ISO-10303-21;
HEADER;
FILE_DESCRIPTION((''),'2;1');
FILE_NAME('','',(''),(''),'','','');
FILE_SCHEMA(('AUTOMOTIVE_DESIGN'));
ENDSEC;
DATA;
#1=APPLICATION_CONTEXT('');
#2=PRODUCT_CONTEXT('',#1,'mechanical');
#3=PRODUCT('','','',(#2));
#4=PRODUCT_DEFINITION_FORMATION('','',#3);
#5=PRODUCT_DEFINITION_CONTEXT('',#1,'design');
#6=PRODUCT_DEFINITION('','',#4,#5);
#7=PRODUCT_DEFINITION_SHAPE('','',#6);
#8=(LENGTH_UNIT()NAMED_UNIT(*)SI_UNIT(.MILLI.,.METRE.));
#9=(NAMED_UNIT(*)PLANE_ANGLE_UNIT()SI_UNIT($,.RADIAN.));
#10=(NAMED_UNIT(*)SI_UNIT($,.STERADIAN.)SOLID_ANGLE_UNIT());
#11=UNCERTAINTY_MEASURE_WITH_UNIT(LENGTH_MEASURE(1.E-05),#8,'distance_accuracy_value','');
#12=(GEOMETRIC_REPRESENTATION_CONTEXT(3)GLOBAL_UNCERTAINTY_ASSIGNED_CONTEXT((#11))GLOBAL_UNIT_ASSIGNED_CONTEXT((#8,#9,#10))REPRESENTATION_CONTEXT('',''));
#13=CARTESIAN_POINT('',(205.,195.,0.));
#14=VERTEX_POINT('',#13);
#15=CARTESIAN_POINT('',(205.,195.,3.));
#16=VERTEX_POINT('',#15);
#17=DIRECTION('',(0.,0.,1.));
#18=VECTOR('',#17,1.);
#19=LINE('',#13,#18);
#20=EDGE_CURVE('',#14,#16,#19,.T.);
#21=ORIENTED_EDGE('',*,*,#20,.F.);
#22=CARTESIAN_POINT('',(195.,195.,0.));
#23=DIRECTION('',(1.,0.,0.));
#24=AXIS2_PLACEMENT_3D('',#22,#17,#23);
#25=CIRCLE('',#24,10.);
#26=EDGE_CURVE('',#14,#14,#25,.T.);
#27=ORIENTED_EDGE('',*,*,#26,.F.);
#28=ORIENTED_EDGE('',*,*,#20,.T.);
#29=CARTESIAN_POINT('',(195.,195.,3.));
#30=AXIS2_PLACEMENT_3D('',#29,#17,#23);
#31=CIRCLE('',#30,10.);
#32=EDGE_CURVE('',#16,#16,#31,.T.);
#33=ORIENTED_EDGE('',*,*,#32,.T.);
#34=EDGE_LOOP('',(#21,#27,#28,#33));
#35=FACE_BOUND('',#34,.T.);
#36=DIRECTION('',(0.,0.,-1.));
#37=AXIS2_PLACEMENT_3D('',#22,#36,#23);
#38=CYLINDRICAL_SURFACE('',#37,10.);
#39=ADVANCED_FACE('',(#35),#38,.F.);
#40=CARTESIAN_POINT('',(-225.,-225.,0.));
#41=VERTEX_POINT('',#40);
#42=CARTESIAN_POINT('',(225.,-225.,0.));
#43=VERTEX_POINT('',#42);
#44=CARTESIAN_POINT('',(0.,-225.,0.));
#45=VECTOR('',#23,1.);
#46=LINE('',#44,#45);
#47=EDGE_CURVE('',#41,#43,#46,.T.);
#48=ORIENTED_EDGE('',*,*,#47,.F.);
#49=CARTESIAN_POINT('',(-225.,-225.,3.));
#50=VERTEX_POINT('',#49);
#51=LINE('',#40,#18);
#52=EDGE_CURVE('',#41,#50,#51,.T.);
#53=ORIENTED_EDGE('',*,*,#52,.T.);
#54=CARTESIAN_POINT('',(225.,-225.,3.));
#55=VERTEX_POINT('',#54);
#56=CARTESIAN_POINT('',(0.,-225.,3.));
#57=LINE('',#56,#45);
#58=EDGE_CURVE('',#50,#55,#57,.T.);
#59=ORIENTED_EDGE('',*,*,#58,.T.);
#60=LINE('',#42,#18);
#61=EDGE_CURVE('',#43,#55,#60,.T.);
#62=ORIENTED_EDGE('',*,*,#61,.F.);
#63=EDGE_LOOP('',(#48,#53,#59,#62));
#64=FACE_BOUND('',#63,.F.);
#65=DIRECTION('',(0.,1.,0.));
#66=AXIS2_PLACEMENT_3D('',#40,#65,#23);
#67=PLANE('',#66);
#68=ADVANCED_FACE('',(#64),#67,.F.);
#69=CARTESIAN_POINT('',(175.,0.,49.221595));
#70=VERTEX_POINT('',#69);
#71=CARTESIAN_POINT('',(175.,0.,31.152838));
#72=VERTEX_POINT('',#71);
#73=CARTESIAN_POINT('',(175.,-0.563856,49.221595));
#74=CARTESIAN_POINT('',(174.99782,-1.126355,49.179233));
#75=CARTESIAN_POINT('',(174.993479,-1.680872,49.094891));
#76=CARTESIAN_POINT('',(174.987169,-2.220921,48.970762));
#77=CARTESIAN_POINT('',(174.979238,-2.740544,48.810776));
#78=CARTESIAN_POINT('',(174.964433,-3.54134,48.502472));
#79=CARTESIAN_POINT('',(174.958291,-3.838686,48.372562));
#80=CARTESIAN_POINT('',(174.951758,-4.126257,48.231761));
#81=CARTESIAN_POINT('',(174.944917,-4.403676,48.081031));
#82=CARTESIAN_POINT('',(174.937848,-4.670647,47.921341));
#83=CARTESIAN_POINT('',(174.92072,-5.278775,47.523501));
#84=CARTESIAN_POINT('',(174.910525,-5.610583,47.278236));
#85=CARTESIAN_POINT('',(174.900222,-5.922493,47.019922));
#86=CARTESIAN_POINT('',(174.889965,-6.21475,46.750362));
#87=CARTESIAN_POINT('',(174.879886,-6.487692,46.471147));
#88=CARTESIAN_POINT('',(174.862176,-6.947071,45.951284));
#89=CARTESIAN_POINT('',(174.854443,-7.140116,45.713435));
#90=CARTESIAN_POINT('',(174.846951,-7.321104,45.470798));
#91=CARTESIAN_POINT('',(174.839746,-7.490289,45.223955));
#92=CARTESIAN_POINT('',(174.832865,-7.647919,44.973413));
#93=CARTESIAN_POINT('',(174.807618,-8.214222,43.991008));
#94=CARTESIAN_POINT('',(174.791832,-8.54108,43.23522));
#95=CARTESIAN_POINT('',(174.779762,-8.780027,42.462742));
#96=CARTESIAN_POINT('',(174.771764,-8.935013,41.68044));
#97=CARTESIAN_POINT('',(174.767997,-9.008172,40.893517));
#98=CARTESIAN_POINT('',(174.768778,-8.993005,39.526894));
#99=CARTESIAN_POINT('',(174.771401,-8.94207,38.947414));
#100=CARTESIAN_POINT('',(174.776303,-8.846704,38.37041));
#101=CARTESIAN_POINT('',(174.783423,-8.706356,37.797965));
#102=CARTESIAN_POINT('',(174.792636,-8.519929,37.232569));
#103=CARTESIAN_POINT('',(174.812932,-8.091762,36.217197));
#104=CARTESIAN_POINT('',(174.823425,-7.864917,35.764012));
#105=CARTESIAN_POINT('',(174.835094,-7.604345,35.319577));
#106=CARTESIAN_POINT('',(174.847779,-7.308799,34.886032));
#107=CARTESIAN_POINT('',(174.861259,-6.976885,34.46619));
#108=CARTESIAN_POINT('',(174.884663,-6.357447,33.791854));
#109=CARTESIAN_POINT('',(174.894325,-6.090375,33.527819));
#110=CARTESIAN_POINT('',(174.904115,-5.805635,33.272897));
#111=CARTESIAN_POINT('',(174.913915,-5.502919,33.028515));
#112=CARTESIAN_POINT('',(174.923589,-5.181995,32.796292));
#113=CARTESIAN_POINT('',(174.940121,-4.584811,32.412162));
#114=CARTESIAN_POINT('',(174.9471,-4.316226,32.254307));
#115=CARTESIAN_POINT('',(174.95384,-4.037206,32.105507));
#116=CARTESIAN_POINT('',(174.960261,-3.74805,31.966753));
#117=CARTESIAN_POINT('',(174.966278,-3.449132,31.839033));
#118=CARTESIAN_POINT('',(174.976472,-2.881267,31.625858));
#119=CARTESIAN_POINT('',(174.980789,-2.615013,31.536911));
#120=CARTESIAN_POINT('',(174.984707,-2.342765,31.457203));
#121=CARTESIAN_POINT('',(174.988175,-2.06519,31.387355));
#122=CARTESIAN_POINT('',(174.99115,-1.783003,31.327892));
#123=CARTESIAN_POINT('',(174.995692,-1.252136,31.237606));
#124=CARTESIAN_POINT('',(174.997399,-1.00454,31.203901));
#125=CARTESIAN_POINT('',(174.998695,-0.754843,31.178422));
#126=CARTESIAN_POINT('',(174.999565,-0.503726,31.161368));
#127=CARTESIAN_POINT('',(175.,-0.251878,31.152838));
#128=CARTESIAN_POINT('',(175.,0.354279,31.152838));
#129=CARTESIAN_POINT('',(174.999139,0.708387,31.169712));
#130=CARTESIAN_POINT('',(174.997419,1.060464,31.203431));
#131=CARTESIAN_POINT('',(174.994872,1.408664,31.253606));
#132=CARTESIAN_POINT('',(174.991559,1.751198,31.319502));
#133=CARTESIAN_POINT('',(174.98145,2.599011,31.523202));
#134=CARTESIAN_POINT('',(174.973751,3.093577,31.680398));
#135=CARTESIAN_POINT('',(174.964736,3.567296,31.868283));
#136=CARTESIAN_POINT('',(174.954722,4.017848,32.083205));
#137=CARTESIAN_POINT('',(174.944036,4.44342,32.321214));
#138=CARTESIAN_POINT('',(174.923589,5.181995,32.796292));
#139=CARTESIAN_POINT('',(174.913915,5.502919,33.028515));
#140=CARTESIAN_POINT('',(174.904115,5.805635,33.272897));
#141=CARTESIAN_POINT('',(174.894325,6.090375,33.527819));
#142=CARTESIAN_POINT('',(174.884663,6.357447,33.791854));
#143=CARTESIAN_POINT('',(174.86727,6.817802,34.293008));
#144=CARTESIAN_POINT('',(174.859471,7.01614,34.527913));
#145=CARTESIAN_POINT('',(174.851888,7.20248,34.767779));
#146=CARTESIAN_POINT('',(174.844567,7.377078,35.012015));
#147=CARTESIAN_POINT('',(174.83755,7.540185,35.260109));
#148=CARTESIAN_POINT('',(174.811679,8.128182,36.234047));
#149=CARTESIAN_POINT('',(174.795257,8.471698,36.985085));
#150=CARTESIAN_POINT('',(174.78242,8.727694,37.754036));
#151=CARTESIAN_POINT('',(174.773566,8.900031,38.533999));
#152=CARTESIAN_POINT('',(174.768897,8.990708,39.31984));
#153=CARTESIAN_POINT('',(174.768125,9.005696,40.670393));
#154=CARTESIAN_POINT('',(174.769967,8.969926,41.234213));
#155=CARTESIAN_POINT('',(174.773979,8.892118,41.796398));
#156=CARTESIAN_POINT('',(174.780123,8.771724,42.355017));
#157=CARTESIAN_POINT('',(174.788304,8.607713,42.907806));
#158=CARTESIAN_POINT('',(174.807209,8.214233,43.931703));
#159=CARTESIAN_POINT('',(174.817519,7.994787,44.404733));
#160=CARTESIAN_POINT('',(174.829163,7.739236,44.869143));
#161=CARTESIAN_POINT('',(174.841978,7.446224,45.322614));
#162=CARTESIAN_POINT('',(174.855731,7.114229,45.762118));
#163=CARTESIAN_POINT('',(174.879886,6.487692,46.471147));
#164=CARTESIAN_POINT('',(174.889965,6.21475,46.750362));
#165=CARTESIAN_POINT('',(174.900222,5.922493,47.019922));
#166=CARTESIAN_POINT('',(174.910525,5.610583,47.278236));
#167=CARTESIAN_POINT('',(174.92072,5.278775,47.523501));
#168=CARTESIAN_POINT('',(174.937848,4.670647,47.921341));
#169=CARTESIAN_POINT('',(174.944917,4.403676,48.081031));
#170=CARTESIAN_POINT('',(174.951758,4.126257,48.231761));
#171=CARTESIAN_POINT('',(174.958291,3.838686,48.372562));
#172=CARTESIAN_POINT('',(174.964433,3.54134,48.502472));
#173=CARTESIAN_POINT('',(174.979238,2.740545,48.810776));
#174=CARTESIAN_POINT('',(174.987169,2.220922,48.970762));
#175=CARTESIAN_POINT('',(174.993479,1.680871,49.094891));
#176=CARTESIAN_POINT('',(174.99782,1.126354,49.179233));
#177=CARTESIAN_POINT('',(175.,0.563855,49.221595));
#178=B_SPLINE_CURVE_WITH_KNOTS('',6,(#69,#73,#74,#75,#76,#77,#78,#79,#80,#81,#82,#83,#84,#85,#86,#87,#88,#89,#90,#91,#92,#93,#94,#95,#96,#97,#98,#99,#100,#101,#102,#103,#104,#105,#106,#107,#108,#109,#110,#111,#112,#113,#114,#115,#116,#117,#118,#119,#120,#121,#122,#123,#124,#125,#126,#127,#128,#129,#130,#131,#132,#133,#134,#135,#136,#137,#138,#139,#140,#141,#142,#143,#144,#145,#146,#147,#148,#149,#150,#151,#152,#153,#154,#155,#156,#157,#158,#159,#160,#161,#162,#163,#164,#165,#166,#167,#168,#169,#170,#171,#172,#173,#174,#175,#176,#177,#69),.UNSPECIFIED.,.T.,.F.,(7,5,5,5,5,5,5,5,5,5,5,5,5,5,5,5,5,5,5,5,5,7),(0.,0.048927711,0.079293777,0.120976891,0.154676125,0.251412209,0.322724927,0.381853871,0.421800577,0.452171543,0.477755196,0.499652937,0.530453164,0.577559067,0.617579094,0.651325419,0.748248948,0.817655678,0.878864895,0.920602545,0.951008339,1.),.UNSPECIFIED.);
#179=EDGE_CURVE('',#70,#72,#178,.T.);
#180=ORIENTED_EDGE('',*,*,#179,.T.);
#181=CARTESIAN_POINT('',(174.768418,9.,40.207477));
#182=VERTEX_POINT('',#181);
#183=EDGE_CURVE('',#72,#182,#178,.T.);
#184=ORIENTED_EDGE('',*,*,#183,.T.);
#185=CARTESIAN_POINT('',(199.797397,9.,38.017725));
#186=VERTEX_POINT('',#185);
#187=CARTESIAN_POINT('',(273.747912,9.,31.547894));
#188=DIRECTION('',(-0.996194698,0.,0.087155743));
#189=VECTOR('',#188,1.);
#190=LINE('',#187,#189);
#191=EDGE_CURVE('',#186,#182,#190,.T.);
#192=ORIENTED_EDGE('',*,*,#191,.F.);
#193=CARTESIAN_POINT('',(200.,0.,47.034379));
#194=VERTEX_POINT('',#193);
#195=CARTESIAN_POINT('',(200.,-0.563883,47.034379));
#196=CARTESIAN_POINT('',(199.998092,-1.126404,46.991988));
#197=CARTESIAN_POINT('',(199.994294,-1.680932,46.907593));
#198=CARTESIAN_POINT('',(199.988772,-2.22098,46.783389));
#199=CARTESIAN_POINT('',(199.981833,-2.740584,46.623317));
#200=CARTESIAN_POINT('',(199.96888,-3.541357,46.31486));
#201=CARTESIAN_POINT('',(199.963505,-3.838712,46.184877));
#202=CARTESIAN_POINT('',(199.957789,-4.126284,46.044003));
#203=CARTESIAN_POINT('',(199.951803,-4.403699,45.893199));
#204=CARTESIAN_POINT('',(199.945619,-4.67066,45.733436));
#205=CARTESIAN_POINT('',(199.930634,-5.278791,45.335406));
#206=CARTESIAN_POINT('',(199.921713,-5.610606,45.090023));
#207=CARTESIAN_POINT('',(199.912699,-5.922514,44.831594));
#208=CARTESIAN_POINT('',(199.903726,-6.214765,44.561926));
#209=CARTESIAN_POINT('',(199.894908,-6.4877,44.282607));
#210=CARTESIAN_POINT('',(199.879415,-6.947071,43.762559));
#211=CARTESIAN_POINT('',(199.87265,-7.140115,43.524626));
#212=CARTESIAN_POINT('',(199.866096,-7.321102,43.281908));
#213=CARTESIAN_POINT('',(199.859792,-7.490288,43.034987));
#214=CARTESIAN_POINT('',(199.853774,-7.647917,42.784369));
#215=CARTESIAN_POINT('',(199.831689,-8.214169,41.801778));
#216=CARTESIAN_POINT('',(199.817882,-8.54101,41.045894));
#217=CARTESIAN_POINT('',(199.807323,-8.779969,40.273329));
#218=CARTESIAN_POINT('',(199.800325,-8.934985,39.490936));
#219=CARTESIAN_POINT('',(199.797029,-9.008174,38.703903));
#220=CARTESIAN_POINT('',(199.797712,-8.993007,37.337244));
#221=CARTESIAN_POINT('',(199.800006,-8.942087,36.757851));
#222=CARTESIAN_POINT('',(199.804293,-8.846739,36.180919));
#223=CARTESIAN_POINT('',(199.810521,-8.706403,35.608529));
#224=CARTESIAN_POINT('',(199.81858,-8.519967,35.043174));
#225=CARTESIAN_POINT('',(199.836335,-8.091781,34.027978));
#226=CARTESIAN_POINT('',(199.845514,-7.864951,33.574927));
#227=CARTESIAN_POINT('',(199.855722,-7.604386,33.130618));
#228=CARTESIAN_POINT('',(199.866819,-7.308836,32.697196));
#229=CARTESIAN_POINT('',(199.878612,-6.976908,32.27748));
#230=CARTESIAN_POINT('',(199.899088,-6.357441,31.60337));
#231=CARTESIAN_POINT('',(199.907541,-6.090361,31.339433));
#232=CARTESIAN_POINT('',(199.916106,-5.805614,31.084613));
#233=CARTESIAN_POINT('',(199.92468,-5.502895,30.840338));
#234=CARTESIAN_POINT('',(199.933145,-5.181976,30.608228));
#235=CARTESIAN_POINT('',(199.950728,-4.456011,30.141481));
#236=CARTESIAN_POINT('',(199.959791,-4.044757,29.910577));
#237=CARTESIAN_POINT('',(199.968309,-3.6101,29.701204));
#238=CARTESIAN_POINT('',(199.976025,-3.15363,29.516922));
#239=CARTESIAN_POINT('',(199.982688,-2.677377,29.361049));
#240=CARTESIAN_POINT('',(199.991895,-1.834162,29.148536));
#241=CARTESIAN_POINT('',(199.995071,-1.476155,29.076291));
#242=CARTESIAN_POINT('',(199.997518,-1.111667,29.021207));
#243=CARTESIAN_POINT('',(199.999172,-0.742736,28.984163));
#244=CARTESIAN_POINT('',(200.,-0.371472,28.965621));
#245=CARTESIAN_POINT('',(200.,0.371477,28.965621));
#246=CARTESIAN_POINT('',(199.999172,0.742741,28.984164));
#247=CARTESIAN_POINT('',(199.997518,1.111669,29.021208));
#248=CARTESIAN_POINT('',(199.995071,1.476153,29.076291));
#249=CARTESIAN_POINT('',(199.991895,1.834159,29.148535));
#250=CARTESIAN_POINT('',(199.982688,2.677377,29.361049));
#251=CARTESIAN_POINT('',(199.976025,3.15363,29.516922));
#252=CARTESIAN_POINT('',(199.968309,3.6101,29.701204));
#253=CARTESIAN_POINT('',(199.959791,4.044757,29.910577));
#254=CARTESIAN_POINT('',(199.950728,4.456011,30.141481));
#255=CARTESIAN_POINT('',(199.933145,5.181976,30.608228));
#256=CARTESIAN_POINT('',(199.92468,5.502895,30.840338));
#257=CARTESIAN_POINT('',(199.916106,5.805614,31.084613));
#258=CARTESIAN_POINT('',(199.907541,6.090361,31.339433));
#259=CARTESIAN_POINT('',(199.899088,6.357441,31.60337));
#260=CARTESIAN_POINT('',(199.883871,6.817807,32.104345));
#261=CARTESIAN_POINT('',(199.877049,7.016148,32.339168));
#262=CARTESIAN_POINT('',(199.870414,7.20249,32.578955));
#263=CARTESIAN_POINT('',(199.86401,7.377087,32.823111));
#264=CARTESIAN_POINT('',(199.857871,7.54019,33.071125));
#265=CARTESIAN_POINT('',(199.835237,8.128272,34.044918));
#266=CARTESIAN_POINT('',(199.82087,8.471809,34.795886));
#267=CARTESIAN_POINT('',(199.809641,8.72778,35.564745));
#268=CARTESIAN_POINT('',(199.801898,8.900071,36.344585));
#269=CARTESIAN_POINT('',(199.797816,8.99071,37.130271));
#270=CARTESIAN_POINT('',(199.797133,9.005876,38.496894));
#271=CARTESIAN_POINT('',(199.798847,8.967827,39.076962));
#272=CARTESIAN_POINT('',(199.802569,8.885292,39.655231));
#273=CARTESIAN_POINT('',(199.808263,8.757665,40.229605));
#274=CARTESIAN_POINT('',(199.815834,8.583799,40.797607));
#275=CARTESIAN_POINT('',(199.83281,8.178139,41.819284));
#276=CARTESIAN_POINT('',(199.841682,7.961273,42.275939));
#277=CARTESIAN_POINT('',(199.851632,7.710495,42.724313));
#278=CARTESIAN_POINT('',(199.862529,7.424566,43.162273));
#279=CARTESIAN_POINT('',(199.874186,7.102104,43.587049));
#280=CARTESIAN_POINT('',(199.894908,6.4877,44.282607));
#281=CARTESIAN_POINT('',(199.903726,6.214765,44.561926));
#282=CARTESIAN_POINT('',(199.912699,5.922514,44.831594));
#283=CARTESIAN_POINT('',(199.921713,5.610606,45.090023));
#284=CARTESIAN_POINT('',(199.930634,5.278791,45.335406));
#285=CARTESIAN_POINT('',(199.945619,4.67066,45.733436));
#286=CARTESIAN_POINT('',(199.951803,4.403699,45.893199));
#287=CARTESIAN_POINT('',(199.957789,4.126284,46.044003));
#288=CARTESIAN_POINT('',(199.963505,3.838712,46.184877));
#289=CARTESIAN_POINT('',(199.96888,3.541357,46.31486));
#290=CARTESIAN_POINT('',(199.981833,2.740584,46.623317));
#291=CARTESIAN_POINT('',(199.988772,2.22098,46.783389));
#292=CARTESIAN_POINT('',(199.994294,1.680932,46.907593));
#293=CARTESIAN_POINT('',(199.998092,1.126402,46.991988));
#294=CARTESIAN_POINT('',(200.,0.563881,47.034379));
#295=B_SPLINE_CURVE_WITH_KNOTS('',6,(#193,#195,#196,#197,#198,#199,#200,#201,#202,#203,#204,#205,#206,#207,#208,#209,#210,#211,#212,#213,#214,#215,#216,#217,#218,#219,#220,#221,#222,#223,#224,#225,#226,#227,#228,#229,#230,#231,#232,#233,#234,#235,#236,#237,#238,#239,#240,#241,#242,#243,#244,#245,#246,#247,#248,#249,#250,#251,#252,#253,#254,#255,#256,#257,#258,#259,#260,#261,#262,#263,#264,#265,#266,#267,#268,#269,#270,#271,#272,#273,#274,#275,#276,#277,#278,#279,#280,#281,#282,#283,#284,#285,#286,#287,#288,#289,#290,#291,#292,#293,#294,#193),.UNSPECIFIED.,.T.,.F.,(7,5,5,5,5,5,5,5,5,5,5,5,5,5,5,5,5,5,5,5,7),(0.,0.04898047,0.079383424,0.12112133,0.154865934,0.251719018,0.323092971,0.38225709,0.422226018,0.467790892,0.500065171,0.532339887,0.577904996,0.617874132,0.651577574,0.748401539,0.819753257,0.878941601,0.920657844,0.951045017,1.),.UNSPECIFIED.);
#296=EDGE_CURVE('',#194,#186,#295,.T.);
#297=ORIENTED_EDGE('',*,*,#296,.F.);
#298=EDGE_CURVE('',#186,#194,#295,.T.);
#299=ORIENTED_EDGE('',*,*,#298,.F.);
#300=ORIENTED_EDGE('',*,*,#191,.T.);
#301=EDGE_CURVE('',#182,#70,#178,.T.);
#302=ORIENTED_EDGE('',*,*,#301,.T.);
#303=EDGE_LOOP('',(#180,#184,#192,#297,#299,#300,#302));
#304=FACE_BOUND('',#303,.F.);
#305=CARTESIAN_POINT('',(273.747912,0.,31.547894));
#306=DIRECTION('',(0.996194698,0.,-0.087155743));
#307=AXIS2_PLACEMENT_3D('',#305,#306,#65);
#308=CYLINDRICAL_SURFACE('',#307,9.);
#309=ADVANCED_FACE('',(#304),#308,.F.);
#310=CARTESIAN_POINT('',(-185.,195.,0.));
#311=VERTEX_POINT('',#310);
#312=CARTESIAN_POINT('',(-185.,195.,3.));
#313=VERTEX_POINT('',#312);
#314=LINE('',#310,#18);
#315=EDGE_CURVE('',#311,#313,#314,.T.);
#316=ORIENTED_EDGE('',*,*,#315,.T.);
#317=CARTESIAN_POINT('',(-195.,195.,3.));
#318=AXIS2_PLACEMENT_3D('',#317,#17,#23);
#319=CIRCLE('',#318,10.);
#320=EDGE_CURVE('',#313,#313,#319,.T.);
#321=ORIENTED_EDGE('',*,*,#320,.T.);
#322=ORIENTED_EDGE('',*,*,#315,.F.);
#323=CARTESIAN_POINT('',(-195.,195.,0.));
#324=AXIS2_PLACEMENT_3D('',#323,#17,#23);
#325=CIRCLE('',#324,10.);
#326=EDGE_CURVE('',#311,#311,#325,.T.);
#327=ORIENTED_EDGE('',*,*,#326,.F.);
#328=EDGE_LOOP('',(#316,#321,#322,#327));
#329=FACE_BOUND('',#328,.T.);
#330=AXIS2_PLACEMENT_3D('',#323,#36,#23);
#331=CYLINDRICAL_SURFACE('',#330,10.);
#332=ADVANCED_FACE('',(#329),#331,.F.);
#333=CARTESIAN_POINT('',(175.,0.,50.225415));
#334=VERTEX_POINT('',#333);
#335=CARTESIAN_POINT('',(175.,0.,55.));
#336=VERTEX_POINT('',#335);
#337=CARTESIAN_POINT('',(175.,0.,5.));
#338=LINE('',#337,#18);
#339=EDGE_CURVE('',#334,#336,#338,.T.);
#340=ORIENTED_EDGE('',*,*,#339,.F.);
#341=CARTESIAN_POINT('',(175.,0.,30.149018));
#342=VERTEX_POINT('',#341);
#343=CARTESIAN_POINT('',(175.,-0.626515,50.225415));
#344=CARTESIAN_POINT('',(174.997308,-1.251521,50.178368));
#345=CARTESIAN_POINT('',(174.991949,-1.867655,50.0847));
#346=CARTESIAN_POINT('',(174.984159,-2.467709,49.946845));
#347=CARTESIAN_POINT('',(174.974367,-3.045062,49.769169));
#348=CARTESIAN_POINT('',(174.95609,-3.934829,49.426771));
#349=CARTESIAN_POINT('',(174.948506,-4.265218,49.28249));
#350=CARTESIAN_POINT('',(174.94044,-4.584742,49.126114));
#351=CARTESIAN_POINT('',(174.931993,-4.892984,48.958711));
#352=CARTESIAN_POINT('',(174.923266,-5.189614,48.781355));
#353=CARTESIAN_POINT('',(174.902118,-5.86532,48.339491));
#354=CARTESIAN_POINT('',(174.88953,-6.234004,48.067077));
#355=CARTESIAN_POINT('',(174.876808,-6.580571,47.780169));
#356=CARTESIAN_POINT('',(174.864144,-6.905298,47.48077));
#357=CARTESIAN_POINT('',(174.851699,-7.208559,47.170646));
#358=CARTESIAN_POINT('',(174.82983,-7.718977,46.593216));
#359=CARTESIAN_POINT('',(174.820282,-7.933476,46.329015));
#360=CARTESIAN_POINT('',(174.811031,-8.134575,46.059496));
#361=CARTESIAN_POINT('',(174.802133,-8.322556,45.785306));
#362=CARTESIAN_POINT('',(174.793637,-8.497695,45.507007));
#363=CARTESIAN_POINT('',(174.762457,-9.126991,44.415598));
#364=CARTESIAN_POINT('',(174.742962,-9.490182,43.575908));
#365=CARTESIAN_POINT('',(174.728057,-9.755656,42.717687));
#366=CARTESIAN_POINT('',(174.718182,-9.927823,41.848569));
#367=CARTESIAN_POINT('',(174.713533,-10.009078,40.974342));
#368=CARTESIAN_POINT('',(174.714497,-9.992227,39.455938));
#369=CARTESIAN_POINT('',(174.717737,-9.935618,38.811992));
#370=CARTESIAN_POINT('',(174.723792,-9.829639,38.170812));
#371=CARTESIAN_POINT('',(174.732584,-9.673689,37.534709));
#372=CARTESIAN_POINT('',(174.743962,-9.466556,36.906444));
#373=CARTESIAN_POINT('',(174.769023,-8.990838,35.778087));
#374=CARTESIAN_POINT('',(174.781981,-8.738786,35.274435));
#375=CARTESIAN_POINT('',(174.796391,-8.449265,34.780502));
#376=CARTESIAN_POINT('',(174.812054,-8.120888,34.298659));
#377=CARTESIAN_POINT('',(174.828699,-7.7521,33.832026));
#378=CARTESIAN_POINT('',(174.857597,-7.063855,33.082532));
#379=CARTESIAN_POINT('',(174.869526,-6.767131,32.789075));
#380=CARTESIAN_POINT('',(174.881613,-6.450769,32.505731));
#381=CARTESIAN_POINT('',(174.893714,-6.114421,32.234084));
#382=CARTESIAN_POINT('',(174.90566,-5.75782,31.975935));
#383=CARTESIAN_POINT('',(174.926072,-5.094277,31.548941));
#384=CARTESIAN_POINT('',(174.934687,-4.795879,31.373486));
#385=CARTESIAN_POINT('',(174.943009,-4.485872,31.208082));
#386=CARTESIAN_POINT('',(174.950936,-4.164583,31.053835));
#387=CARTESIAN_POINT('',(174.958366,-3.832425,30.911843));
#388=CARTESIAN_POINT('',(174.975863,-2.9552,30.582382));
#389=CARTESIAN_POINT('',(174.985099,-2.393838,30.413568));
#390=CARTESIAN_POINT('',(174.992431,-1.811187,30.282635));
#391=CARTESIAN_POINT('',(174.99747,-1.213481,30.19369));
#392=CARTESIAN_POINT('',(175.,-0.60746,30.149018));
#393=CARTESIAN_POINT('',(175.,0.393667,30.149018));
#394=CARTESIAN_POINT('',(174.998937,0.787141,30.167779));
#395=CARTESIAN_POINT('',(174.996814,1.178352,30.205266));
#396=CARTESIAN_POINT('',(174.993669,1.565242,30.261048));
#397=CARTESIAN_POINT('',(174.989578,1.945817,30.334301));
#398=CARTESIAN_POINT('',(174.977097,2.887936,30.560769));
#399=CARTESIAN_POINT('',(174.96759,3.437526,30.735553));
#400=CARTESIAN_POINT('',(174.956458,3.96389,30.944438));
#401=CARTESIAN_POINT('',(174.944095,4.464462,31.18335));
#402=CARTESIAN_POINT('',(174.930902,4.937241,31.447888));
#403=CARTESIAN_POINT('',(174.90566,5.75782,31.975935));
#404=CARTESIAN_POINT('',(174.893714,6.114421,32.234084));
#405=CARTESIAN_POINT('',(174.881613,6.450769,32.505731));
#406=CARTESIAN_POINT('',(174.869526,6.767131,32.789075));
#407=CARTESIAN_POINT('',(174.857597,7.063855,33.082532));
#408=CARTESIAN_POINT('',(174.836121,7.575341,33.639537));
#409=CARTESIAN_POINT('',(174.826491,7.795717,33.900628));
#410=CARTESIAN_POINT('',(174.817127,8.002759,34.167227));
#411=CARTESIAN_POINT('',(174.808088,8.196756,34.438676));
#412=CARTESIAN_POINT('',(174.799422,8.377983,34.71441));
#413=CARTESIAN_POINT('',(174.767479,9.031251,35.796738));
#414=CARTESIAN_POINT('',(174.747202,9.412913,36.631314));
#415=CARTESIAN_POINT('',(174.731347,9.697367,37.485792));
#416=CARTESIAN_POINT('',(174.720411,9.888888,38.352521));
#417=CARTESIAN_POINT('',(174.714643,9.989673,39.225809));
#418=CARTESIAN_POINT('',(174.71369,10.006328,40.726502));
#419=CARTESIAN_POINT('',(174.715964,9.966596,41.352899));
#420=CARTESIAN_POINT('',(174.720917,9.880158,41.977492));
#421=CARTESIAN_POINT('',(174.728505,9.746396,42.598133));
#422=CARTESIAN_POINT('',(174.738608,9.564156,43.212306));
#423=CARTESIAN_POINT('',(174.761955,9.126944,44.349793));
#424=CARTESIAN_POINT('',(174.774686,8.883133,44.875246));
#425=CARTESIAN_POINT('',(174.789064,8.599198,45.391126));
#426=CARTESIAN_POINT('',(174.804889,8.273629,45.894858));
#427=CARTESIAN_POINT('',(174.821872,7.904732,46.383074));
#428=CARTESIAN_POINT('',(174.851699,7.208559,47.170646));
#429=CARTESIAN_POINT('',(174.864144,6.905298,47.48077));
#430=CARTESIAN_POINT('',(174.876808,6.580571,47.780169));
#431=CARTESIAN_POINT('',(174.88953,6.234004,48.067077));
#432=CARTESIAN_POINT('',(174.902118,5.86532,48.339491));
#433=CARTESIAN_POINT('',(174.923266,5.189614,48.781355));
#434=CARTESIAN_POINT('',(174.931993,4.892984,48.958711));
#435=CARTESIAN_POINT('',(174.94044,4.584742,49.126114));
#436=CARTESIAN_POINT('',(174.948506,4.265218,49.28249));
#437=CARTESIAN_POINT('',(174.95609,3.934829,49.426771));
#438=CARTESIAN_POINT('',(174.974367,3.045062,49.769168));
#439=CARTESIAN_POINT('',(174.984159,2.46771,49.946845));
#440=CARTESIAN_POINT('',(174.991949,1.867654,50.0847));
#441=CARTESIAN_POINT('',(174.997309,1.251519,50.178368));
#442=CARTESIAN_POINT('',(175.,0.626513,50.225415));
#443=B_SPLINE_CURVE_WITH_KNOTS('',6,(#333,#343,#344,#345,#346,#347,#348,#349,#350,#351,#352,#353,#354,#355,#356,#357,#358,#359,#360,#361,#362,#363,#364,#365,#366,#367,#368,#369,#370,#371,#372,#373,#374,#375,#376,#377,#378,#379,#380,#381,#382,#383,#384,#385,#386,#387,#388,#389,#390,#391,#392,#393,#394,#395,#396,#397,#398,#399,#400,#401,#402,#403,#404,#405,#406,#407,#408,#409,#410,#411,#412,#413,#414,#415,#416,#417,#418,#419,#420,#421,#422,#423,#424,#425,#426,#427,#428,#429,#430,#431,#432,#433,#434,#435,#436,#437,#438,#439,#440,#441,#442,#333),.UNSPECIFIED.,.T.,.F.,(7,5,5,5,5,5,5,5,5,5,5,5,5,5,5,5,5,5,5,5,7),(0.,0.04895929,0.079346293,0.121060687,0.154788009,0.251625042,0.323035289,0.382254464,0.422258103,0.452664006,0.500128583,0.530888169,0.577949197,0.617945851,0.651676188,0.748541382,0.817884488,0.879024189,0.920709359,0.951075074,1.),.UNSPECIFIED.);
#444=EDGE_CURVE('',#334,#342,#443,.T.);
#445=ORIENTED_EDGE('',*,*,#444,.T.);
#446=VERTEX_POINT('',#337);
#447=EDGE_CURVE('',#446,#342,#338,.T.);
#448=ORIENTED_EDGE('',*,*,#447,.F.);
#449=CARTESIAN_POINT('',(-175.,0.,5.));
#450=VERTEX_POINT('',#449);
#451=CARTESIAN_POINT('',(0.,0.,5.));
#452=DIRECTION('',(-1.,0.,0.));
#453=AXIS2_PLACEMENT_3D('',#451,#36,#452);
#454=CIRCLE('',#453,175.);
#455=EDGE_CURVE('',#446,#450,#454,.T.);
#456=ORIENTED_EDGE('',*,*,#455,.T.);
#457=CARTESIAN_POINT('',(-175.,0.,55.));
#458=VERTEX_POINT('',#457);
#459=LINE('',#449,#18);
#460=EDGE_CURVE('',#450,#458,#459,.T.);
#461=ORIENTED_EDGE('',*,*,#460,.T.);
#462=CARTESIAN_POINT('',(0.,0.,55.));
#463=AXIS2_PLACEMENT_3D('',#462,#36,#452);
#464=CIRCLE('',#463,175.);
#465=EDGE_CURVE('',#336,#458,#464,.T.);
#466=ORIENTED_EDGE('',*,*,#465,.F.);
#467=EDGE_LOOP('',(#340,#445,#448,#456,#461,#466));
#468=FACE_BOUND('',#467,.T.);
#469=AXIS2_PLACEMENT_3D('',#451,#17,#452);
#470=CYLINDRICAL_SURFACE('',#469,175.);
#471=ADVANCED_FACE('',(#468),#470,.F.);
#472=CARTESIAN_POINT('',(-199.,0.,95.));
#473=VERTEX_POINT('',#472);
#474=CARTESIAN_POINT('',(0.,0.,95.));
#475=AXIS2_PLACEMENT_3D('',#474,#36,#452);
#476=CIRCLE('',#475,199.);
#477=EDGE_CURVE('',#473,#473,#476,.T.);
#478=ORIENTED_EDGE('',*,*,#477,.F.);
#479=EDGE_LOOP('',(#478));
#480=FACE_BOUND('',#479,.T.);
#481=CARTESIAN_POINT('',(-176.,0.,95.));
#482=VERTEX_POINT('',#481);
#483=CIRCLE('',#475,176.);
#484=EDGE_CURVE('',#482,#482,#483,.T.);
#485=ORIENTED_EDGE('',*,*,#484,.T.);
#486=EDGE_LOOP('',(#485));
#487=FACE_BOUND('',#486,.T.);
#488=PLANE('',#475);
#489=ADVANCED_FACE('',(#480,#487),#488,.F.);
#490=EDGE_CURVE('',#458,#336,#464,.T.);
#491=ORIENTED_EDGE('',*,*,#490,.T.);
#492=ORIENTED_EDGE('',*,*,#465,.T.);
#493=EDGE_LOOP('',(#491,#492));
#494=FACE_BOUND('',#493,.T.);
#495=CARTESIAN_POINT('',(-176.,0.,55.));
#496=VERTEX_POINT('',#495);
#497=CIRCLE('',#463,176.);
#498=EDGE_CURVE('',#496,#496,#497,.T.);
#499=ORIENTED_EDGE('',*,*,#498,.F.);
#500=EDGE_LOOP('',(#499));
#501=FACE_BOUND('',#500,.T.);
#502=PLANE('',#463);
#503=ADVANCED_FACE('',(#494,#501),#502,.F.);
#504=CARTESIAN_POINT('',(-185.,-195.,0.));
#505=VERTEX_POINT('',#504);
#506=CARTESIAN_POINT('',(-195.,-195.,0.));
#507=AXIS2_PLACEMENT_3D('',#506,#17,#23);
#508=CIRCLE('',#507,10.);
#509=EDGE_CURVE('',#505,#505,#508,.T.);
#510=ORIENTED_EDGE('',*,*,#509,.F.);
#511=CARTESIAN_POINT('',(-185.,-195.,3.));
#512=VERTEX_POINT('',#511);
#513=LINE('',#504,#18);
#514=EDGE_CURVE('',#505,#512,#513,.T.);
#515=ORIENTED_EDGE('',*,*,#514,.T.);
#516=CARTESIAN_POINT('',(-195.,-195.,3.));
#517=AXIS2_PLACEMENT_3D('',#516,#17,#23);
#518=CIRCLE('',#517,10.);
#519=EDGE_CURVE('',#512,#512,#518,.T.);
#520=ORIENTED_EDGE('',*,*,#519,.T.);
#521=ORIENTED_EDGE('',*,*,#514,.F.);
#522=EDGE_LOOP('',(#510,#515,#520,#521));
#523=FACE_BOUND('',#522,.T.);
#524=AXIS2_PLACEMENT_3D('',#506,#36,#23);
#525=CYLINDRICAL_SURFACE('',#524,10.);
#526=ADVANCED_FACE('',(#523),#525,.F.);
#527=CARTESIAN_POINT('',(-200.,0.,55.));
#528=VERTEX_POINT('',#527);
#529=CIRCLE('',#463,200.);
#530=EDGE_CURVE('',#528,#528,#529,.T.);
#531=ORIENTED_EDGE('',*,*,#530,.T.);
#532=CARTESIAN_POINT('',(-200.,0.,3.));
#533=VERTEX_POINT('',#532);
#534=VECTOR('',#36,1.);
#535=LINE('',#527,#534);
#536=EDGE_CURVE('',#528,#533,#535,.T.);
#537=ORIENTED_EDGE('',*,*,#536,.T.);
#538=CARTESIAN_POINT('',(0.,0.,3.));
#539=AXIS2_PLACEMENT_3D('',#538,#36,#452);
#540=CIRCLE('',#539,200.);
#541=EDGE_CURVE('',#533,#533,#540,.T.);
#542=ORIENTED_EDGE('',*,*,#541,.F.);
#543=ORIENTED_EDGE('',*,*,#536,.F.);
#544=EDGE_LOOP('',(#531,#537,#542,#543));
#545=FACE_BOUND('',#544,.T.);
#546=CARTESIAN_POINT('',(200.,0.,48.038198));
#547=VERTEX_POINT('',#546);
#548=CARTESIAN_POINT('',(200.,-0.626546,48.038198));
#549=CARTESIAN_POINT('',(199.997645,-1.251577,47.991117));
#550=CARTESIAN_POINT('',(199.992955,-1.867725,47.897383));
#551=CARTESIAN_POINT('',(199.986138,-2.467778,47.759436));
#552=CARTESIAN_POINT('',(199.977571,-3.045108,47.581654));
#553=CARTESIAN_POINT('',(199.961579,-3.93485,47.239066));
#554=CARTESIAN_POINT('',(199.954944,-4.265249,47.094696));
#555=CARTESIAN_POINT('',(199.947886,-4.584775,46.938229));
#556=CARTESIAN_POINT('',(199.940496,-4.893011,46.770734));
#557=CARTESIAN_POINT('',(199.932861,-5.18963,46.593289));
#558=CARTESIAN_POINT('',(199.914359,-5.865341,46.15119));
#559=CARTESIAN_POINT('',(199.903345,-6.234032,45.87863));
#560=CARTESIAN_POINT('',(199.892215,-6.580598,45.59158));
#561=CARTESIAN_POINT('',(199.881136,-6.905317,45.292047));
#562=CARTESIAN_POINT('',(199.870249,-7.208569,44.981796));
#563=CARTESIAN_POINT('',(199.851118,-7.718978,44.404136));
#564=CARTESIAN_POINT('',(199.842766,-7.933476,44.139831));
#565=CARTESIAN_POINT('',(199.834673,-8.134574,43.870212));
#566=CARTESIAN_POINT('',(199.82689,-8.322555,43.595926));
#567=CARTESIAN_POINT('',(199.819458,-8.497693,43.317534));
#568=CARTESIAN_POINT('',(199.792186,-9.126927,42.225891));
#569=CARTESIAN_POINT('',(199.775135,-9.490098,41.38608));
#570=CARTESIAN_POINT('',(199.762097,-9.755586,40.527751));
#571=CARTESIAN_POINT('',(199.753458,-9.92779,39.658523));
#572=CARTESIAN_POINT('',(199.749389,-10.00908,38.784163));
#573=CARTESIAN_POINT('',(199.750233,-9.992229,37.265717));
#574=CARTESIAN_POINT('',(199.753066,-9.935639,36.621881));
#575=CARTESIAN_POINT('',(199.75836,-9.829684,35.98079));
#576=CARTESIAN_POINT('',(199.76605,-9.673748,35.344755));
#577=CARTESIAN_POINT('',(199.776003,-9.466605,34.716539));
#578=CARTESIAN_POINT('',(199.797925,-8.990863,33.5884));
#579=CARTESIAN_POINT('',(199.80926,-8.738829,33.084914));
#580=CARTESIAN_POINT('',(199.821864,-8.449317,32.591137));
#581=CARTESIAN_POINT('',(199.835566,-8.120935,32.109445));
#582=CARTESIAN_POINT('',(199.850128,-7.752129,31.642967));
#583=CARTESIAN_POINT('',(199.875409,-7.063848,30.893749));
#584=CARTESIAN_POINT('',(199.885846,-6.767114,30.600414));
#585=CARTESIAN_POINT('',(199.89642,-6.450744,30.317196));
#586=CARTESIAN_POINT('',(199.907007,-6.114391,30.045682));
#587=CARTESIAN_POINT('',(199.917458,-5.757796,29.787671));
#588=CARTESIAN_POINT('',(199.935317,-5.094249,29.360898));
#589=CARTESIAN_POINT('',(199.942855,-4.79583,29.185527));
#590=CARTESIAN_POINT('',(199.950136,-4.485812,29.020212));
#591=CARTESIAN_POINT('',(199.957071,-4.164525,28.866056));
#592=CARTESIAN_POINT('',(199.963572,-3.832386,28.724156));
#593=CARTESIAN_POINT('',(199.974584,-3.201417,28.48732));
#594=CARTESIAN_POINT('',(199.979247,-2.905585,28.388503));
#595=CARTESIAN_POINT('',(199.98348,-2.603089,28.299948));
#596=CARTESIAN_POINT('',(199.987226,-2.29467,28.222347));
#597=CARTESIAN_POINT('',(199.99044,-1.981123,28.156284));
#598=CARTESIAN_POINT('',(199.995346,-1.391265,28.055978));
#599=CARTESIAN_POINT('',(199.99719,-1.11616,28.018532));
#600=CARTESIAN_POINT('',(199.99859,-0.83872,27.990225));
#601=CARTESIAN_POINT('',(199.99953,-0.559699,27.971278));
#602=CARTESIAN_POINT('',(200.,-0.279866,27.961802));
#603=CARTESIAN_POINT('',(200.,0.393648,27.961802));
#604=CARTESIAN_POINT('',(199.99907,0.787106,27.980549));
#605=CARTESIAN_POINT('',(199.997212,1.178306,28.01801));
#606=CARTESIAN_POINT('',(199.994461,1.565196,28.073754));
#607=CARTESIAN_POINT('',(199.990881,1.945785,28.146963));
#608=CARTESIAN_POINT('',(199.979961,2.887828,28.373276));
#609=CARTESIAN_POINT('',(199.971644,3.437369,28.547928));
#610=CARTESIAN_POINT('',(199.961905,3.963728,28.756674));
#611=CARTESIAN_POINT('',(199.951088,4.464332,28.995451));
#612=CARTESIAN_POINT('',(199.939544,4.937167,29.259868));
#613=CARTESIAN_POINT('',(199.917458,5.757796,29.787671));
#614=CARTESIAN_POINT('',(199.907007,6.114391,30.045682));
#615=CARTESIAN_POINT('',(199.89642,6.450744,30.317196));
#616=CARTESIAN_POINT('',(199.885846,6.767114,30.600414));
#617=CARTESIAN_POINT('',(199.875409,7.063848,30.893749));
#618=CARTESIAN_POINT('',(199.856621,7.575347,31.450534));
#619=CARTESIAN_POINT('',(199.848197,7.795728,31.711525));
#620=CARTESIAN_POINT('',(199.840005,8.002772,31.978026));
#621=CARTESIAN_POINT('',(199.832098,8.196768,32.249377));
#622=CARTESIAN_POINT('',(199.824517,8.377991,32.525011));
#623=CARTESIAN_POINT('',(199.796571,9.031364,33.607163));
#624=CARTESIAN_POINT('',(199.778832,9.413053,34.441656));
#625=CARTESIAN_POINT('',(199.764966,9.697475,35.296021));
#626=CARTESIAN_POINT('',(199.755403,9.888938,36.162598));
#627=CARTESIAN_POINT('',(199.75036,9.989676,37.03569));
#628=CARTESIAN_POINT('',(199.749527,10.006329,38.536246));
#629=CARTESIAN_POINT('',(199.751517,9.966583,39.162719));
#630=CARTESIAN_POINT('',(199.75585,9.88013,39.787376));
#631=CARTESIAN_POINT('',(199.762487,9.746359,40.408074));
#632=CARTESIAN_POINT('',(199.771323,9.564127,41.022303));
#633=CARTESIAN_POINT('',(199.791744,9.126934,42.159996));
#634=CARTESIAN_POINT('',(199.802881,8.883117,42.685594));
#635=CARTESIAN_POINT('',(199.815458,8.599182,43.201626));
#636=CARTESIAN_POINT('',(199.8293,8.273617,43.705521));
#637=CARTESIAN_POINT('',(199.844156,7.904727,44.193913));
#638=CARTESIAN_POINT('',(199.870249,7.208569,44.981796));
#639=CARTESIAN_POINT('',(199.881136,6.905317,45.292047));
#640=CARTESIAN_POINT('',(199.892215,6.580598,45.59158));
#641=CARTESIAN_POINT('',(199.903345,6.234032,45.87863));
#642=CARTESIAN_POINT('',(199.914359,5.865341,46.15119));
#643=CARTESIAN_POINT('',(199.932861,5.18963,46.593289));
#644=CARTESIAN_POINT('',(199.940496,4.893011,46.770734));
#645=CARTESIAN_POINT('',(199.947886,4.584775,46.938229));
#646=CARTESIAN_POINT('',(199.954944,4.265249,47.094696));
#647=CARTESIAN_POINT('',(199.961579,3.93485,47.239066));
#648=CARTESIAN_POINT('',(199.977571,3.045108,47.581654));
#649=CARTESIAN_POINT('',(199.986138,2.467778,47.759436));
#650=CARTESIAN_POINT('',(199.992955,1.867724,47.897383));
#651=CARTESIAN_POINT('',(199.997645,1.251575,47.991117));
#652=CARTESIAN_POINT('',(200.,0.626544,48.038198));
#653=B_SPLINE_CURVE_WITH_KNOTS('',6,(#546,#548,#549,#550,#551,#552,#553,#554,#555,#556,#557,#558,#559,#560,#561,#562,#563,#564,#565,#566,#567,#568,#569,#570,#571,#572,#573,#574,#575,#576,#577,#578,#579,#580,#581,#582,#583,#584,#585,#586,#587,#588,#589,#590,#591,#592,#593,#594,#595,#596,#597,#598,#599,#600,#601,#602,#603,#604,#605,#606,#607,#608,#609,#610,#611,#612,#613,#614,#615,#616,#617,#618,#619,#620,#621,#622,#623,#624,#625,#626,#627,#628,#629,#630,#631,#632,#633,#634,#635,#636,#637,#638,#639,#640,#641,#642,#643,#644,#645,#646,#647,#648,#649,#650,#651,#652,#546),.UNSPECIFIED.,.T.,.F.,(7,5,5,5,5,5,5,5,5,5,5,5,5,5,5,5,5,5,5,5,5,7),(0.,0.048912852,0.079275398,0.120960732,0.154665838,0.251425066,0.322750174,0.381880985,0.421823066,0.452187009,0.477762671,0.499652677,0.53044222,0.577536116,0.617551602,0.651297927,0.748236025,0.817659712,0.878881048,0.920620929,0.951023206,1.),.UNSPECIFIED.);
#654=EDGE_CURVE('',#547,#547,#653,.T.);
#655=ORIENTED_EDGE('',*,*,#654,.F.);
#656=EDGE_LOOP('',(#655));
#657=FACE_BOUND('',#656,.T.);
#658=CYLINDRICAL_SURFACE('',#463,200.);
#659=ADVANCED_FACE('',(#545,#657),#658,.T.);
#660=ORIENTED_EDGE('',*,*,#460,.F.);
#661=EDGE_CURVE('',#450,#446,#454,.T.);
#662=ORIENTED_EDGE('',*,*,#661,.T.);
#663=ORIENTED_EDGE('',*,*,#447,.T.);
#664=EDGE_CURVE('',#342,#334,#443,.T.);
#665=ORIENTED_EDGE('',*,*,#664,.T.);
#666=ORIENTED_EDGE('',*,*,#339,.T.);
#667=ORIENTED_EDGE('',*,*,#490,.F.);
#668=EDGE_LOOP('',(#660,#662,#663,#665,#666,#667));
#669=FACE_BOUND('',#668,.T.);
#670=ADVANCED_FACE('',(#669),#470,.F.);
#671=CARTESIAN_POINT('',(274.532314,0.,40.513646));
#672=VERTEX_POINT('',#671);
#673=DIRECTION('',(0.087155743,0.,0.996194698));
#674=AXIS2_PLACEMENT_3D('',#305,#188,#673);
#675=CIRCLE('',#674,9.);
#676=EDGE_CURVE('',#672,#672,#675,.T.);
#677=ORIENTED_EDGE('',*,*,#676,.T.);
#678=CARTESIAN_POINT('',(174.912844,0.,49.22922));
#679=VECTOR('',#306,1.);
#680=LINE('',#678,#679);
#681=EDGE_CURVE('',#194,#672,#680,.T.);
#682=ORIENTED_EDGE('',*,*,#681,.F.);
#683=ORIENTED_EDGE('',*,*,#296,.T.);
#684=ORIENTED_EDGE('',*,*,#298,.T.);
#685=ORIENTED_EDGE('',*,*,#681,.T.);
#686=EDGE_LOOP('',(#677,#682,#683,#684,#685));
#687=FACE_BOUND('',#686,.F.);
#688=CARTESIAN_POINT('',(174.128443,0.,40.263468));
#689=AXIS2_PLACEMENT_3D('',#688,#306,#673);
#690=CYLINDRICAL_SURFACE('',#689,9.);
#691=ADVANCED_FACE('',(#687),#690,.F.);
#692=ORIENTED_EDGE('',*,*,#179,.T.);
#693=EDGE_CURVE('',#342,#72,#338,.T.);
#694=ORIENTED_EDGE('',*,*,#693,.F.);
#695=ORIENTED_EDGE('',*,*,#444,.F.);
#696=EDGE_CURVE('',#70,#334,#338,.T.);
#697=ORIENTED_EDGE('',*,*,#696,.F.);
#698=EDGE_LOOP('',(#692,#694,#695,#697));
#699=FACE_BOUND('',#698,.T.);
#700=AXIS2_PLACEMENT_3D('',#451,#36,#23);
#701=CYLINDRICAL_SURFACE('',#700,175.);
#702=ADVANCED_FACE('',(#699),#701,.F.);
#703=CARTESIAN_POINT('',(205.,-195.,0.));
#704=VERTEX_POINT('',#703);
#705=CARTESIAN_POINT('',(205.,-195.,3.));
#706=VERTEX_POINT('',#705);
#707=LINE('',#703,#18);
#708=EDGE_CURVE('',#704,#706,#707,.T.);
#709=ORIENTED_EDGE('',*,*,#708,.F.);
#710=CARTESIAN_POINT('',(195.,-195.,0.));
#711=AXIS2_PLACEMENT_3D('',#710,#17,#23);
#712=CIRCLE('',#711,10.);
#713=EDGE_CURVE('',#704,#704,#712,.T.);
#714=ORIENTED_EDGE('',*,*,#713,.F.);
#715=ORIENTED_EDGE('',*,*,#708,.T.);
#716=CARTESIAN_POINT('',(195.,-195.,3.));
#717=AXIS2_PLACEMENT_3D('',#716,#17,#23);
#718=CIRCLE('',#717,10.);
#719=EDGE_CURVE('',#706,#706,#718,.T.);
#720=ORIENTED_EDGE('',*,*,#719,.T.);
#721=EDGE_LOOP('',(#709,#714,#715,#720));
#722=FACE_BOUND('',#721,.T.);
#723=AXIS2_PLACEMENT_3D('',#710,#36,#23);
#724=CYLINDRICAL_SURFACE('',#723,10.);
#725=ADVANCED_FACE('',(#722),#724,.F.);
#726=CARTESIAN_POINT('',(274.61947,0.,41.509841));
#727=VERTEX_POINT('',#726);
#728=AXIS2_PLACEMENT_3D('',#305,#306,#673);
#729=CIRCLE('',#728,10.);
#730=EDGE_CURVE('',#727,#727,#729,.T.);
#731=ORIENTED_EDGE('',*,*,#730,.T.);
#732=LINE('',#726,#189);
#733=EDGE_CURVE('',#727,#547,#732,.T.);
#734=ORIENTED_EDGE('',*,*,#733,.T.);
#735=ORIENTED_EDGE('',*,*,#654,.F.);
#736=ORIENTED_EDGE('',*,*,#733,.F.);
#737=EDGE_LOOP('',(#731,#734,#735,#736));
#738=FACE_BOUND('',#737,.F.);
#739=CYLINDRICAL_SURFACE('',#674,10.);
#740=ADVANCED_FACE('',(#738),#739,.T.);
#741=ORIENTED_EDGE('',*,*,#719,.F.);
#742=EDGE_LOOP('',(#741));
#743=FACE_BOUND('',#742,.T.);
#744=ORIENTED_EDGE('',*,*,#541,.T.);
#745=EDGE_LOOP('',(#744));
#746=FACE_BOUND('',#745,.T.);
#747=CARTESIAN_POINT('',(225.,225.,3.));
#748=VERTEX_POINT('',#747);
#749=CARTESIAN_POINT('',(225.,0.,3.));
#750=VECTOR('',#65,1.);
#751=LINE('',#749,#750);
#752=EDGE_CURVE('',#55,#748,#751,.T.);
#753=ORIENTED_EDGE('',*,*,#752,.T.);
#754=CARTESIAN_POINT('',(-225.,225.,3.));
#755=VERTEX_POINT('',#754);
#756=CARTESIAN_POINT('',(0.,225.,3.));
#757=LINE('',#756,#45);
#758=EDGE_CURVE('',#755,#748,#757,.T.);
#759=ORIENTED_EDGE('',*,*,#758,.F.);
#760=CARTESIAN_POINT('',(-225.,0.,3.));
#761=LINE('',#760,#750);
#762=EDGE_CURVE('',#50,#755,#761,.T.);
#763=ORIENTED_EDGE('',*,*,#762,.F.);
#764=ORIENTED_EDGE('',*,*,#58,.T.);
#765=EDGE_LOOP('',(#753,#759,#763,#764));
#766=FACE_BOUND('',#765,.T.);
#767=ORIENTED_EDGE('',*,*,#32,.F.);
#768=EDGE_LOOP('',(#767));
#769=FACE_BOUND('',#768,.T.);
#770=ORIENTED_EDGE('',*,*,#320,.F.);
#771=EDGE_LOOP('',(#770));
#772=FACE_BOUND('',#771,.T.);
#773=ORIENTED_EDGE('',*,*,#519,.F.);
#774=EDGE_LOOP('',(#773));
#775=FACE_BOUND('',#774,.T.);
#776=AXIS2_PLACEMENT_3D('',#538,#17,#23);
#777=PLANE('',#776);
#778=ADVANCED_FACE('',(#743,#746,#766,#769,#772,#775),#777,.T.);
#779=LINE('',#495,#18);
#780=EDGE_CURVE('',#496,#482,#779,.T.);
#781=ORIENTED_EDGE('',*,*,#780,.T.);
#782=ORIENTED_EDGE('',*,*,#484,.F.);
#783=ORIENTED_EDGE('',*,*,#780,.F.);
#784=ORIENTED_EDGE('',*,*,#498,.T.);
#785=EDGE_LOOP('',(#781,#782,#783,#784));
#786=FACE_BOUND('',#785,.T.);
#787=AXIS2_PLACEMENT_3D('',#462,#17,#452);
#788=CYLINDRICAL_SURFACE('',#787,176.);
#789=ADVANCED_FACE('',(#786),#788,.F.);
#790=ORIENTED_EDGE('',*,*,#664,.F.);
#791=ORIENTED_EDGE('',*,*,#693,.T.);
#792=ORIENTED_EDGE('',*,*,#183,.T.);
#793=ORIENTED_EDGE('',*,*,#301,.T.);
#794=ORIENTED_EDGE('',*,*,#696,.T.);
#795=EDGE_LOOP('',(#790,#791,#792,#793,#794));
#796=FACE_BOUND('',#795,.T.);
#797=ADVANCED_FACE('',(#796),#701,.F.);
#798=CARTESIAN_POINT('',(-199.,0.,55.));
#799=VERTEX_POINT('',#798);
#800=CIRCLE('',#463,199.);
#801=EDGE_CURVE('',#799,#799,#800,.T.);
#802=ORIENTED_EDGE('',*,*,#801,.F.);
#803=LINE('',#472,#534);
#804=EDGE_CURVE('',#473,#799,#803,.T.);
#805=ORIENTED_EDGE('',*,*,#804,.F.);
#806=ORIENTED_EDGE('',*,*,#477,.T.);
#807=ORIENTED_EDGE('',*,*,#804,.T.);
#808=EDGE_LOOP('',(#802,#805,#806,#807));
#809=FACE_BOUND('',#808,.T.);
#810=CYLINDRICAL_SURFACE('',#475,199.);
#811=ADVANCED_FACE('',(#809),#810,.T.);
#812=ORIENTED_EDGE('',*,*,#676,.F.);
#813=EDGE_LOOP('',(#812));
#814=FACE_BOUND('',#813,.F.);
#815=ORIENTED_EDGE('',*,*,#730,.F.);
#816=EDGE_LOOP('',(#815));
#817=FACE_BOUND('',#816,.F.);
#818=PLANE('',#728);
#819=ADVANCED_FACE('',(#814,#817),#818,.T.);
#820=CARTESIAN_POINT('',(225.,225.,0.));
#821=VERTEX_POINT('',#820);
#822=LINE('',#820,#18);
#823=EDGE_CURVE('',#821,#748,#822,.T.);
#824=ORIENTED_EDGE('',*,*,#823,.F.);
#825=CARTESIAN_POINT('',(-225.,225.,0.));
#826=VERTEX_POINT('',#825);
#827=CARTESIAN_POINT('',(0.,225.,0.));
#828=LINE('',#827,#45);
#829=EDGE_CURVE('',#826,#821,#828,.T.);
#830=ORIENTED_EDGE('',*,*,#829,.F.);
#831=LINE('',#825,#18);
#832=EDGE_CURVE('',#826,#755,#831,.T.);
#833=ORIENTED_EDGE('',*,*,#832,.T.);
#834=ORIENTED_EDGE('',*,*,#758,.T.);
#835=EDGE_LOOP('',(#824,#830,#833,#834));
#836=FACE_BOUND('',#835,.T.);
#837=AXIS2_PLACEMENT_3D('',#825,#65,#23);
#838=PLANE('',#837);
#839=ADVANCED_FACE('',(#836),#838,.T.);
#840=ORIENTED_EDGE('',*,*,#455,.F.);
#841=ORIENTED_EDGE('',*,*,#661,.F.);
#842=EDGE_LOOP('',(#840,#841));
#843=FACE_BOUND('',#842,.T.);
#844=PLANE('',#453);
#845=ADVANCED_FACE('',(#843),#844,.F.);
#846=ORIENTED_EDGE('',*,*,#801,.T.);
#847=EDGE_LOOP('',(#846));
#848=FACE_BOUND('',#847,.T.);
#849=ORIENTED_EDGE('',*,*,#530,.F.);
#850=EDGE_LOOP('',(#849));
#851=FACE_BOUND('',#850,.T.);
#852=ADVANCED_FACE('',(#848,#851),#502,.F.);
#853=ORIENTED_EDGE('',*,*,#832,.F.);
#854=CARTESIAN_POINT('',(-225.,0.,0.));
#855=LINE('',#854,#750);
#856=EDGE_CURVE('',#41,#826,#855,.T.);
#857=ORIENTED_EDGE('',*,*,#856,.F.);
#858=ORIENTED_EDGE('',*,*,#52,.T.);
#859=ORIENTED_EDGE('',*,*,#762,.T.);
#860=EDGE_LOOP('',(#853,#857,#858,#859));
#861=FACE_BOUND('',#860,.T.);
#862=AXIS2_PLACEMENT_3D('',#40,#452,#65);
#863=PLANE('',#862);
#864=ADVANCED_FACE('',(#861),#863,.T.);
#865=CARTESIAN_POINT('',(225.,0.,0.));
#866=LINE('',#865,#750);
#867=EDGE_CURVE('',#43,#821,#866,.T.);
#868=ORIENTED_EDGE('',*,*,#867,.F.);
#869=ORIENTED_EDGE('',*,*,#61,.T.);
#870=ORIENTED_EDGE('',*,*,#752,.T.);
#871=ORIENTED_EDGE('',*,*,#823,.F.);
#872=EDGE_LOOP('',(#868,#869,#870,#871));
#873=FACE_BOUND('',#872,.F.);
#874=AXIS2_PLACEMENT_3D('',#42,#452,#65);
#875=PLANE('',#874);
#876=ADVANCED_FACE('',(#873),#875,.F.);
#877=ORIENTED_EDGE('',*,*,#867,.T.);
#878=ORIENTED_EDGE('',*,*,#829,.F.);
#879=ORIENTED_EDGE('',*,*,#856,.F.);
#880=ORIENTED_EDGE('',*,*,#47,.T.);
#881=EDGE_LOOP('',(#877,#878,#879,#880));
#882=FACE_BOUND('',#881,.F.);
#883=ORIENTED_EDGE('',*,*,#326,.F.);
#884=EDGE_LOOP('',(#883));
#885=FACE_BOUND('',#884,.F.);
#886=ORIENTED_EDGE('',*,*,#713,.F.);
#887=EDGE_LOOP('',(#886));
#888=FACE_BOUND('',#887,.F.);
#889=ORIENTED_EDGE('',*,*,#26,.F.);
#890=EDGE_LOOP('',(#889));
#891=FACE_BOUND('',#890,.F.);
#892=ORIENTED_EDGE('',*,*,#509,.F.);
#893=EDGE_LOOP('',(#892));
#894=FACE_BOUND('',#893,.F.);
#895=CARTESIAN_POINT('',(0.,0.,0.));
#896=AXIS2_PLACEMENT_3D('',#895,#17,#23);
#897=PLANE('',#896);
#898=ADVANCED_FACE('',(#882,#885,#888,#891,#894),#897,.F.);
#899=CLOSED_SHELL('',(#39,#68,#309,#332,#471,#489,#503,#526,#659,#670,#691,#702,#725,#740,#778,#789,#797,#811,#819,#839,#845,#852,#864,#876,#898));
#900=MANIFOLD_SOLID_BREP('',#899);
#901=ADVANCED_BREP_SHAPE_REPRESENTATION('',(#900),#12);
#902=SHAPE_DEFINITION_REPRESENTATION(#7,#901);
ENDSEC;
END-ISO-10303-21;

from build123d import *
from build123d import SkipClean  # not in build123d's __all__

# Parameters (mm, degrees)
F0_W     = 10
F0_H     = 3
F2_W     = 450
F2_H     = 450
F2_R     = 10
F3_DEPTH = 3
F6_R     = 9
F7_DEPTH = 120
F8_R     = 175
F9_DEPTH = 200


with BuildPart() as f1:
    # F0 (on Front) → F1 (revolve)
    with BuildSketch(Plane.XZ):
        Polygon((-200, 5), (-175, 5), (-175, 55), (-176, 55), (-176, 95), (-199, 95), (-199, 55), (-200, 55), align=None)
        Polygon((-10, 5), (-175, 5), (-200, 5), (-200, 2), (-10, 2), align=None)
        with Locations((-5, 3.5)):
            Rectangle(F0_W, F0_H)
    revolve(axis=Axis((0, 0, 187.9212413023), (0, 0, -1)))

    # F2 (on Top) → F3 (join)
    with BuildSketch(Plane.XY):
        Rectangle(F2_W, F2_H)
        with Locations((-195, -195)):
            Circle(F2_R, mode=Mode.SUBTRACT)
        with Locations((195, -195)):
            Circle(F2_R, mode=Mode.SUBTRACT)
        with Locations((-195, 195)):
            Circle(F2_R, mode=Mode.SUBTRACT)
        with Locations((195, 195)):
            Circle(F2_R, mode=Mode.SUBTRACT)
    extrude(amount=F3_DEPTH)

    # F4 (on Front) → F5 (revolve)
    with BuildSketch(Plane.XZ):
        Polygon((274.6194698092, 41.5098406888), (175, 50.2254149636), (174.9128442573, 49.2292202655), (274.5323140664, 40.5136459907), align=None)
    revolve(axis=Axis((287.7442754949, 0, 30.3233706049), (0.9961946981, 0, -0.0871557427)))

    # F6 (on face) → F7 (cut)
    with BuildSketch(Plane(origin=(268.9293723072, 0, -23.528271366), x_dir=(0, 1, 0), z_dir=(0.9961946981, 0, -0.0871557427))):
        with Locations((0, 55.286547077)):
            Circle(F6_R)
    extrude(amount=-F7_DEPTH, mode=Mode.SUBTRACT)

    # F8 (on face) → F9 (cut)
    with BuildSketch(Plane.XY.offset(5)):
        Circle(F8_R)
    with SkipClean():  # cleaning this boolean's faces spoils the solid; the shape is the same uncleaned
        extrude(amount=F9_DEPTH, mode=Mode.SUBTRACT)


solid = f1.part
